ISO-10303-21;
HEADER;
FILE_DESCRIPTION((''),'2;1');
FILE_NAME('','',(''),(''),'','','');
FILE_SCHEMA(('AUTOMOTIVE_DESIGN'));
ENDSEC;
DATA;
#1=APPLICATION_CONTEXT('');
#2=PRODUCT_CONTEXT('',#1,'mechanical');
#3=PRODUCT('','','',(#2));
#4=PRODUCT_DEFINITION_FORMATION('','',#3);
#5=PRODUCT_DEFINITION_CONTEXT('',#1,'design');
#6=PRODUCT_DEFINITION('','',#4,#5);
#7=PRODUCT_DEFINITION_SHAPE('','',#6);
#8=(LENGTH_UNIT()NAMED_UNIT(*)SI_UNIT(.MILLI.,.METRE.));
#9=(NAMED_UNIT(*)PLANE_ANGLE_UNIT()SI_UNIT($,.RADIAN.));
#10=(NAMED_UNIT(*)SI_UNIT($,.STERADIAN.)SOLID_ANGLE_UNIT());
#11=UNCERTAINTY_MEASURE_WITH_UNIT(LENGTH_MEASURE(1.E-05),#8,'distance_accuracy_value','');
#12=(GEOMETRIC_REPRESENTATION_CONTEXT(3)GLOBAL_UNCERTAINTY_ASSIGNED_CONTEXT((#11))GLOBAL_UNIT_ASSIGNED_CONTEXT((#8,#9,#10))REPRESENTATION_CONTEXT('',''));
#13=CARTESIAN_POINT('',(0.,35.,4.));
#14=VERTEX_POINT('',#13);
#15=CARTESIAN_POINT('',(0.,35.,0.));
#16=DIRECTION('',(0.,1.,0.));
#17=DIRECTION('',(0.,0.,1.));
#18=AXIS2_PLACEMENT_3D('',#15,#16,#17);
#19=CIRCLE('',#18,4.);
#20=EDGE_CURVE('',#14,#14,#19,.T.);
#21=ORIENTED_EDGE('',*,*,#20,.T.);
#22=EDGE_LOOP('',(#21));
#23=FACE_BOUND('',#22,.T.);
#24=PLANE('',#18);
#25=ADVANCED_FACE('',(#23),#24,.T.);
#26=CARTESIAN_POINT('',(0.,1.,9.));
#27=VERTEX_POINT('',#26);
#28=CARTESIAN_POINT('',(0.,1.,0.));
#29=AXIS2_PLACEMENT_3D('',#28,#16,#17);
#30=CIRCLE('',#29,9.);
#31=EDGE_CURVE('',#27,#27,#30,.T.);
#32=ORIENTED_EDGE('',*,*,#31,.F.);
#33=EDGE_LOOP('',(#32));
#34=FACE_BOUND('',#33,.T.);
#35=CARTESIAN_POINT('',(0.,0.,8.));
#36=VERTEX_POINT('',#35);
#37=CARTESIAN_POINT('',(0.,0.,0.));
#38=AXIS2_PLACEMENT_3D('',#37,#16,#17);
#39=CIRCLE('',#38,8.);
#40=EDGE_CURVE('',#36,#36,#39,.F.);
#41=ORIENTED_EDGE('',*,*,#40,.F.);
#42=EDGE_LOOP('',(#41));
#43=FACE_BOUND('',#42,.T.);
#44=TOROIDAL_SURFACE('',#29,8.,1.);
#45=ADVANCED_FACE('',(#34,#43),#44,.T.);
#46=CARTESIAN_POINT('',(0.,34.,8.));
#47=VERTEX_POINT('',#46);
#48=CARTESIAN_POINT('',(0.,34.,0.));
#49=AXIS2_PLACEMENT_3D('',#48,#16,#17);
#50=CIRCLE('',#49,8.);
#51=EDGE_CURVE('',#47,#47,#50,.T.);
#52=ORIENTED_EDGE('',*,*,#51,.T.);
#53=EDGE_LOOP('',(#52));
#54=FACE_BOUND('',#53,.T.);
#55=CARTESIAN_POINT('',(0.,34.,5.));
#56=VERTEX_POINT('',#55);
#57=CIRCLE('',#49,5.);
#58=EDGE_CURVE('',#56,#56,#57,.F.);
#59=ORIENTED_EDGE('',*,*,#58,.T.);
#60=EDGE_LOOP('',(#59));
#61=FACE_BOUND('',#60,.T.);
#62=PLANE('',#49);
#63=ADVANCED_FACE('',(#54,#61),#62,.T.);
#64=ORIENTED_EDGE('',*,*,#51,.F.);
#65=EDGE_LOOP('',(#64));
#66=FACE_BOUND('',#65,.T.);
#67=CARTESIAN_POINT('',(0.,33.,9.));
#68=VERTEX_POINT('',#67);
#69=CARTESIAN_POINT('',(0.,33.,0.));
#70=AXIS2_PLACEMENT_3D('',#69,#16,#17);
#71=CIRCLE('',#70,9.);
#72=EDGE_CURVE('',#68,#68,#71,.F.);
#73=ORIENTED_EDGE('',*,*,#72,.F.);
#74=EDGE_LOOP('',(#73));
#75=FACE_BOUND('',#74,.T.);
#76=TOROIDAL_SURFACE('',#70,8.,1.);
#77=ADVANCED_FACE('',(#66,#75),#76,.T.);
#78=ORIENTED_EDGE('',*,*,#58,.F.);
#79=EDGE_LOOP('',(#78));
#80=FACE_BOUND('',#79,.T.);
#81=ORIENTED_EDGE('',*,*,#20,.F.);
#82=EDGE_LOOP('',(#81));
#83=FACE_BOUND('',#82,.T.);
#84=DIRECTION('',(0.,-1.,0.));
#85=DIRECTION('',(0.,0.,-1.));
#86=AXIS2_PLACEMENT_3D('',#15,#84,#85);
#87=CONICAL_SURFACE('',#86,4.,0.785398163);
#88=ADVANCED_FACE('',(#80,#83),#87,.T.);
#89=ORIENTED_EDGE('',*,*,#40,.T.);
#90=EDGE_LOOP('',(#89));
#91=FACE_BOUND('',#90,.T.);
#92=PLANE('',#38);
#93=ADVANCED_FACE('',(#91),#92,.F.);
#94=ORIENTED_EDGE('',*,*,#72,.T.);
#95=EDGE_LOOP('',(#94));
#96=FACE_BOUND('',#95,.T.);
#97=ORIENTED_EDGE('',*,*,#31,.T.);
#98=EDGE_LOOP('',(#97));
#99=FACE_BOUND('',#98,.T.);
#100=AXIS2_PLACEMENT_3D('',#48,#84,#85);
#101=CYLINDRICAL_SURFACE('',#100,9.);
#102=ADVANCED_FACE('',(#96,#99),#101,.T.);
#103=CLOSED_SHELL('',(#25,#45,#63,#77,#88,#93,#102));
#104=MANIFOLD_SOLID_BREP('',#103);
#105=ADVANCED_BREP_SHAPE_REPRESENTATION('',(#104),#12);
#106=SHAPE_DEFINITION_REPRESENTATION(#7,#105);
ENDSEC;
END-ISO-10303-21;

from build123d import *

# Parameters (mm, degrees)
SKETCH1_R           = 9
BOSS_EXTRUDE1_DEPTH = 34
SKETCH2_R           = 4
BOSS_EXTRUDE2_DEPTH = 1
FILLET1_R           = 1
CHAMFER1_SIZE       = 1


with BuildPart() as part:
    # Sketch1 → Boss-Extrude1 (new body)
    with BuildSketch(Plane(origin=(0, 0, 0), x_dir=(1, 0, 0), z_dir=(0, 1, 0))):
        with Locations(Location((0, 0, 0), (0, 0, 270))):
            Circle(SKETCH1_R)
    extrude(amount=BOSS_EXTRUDE1_DEPTH)

    # Sketch2 → Boss-Extrude2 (add)
    with BuildSketch(Plane(origin=(0, 34, 0), x_dir=(1, 0, 0), z_dir=(0, 1, 0))):
        with Locations(Location((0, 0, 0), (0, 0, 270))):
            Circle(SKETCH2_R)
    extrude(amount=BOSS_EXTRUDE2_DEPTH)

    # Fillet1
    fillet1_edges = [part.edges().sort_by_distance(p)[0] for p in [
        (0, 0, -9),
        (0, 34, -9),
    ]]
    fillet(fillet1_edges, radius=FILLET1_R)

    # Chamfer1
    chamfer1_edges = [part.edges().sort_by_distance(p)[0] for p in [
        (0, 34, -4),
    ]]
    chamfer(chamfer1_edges, length=CHAMFER1_SIZE - 0.0001)  # a hair under: the kernel refuses the full size


solid = part.part
